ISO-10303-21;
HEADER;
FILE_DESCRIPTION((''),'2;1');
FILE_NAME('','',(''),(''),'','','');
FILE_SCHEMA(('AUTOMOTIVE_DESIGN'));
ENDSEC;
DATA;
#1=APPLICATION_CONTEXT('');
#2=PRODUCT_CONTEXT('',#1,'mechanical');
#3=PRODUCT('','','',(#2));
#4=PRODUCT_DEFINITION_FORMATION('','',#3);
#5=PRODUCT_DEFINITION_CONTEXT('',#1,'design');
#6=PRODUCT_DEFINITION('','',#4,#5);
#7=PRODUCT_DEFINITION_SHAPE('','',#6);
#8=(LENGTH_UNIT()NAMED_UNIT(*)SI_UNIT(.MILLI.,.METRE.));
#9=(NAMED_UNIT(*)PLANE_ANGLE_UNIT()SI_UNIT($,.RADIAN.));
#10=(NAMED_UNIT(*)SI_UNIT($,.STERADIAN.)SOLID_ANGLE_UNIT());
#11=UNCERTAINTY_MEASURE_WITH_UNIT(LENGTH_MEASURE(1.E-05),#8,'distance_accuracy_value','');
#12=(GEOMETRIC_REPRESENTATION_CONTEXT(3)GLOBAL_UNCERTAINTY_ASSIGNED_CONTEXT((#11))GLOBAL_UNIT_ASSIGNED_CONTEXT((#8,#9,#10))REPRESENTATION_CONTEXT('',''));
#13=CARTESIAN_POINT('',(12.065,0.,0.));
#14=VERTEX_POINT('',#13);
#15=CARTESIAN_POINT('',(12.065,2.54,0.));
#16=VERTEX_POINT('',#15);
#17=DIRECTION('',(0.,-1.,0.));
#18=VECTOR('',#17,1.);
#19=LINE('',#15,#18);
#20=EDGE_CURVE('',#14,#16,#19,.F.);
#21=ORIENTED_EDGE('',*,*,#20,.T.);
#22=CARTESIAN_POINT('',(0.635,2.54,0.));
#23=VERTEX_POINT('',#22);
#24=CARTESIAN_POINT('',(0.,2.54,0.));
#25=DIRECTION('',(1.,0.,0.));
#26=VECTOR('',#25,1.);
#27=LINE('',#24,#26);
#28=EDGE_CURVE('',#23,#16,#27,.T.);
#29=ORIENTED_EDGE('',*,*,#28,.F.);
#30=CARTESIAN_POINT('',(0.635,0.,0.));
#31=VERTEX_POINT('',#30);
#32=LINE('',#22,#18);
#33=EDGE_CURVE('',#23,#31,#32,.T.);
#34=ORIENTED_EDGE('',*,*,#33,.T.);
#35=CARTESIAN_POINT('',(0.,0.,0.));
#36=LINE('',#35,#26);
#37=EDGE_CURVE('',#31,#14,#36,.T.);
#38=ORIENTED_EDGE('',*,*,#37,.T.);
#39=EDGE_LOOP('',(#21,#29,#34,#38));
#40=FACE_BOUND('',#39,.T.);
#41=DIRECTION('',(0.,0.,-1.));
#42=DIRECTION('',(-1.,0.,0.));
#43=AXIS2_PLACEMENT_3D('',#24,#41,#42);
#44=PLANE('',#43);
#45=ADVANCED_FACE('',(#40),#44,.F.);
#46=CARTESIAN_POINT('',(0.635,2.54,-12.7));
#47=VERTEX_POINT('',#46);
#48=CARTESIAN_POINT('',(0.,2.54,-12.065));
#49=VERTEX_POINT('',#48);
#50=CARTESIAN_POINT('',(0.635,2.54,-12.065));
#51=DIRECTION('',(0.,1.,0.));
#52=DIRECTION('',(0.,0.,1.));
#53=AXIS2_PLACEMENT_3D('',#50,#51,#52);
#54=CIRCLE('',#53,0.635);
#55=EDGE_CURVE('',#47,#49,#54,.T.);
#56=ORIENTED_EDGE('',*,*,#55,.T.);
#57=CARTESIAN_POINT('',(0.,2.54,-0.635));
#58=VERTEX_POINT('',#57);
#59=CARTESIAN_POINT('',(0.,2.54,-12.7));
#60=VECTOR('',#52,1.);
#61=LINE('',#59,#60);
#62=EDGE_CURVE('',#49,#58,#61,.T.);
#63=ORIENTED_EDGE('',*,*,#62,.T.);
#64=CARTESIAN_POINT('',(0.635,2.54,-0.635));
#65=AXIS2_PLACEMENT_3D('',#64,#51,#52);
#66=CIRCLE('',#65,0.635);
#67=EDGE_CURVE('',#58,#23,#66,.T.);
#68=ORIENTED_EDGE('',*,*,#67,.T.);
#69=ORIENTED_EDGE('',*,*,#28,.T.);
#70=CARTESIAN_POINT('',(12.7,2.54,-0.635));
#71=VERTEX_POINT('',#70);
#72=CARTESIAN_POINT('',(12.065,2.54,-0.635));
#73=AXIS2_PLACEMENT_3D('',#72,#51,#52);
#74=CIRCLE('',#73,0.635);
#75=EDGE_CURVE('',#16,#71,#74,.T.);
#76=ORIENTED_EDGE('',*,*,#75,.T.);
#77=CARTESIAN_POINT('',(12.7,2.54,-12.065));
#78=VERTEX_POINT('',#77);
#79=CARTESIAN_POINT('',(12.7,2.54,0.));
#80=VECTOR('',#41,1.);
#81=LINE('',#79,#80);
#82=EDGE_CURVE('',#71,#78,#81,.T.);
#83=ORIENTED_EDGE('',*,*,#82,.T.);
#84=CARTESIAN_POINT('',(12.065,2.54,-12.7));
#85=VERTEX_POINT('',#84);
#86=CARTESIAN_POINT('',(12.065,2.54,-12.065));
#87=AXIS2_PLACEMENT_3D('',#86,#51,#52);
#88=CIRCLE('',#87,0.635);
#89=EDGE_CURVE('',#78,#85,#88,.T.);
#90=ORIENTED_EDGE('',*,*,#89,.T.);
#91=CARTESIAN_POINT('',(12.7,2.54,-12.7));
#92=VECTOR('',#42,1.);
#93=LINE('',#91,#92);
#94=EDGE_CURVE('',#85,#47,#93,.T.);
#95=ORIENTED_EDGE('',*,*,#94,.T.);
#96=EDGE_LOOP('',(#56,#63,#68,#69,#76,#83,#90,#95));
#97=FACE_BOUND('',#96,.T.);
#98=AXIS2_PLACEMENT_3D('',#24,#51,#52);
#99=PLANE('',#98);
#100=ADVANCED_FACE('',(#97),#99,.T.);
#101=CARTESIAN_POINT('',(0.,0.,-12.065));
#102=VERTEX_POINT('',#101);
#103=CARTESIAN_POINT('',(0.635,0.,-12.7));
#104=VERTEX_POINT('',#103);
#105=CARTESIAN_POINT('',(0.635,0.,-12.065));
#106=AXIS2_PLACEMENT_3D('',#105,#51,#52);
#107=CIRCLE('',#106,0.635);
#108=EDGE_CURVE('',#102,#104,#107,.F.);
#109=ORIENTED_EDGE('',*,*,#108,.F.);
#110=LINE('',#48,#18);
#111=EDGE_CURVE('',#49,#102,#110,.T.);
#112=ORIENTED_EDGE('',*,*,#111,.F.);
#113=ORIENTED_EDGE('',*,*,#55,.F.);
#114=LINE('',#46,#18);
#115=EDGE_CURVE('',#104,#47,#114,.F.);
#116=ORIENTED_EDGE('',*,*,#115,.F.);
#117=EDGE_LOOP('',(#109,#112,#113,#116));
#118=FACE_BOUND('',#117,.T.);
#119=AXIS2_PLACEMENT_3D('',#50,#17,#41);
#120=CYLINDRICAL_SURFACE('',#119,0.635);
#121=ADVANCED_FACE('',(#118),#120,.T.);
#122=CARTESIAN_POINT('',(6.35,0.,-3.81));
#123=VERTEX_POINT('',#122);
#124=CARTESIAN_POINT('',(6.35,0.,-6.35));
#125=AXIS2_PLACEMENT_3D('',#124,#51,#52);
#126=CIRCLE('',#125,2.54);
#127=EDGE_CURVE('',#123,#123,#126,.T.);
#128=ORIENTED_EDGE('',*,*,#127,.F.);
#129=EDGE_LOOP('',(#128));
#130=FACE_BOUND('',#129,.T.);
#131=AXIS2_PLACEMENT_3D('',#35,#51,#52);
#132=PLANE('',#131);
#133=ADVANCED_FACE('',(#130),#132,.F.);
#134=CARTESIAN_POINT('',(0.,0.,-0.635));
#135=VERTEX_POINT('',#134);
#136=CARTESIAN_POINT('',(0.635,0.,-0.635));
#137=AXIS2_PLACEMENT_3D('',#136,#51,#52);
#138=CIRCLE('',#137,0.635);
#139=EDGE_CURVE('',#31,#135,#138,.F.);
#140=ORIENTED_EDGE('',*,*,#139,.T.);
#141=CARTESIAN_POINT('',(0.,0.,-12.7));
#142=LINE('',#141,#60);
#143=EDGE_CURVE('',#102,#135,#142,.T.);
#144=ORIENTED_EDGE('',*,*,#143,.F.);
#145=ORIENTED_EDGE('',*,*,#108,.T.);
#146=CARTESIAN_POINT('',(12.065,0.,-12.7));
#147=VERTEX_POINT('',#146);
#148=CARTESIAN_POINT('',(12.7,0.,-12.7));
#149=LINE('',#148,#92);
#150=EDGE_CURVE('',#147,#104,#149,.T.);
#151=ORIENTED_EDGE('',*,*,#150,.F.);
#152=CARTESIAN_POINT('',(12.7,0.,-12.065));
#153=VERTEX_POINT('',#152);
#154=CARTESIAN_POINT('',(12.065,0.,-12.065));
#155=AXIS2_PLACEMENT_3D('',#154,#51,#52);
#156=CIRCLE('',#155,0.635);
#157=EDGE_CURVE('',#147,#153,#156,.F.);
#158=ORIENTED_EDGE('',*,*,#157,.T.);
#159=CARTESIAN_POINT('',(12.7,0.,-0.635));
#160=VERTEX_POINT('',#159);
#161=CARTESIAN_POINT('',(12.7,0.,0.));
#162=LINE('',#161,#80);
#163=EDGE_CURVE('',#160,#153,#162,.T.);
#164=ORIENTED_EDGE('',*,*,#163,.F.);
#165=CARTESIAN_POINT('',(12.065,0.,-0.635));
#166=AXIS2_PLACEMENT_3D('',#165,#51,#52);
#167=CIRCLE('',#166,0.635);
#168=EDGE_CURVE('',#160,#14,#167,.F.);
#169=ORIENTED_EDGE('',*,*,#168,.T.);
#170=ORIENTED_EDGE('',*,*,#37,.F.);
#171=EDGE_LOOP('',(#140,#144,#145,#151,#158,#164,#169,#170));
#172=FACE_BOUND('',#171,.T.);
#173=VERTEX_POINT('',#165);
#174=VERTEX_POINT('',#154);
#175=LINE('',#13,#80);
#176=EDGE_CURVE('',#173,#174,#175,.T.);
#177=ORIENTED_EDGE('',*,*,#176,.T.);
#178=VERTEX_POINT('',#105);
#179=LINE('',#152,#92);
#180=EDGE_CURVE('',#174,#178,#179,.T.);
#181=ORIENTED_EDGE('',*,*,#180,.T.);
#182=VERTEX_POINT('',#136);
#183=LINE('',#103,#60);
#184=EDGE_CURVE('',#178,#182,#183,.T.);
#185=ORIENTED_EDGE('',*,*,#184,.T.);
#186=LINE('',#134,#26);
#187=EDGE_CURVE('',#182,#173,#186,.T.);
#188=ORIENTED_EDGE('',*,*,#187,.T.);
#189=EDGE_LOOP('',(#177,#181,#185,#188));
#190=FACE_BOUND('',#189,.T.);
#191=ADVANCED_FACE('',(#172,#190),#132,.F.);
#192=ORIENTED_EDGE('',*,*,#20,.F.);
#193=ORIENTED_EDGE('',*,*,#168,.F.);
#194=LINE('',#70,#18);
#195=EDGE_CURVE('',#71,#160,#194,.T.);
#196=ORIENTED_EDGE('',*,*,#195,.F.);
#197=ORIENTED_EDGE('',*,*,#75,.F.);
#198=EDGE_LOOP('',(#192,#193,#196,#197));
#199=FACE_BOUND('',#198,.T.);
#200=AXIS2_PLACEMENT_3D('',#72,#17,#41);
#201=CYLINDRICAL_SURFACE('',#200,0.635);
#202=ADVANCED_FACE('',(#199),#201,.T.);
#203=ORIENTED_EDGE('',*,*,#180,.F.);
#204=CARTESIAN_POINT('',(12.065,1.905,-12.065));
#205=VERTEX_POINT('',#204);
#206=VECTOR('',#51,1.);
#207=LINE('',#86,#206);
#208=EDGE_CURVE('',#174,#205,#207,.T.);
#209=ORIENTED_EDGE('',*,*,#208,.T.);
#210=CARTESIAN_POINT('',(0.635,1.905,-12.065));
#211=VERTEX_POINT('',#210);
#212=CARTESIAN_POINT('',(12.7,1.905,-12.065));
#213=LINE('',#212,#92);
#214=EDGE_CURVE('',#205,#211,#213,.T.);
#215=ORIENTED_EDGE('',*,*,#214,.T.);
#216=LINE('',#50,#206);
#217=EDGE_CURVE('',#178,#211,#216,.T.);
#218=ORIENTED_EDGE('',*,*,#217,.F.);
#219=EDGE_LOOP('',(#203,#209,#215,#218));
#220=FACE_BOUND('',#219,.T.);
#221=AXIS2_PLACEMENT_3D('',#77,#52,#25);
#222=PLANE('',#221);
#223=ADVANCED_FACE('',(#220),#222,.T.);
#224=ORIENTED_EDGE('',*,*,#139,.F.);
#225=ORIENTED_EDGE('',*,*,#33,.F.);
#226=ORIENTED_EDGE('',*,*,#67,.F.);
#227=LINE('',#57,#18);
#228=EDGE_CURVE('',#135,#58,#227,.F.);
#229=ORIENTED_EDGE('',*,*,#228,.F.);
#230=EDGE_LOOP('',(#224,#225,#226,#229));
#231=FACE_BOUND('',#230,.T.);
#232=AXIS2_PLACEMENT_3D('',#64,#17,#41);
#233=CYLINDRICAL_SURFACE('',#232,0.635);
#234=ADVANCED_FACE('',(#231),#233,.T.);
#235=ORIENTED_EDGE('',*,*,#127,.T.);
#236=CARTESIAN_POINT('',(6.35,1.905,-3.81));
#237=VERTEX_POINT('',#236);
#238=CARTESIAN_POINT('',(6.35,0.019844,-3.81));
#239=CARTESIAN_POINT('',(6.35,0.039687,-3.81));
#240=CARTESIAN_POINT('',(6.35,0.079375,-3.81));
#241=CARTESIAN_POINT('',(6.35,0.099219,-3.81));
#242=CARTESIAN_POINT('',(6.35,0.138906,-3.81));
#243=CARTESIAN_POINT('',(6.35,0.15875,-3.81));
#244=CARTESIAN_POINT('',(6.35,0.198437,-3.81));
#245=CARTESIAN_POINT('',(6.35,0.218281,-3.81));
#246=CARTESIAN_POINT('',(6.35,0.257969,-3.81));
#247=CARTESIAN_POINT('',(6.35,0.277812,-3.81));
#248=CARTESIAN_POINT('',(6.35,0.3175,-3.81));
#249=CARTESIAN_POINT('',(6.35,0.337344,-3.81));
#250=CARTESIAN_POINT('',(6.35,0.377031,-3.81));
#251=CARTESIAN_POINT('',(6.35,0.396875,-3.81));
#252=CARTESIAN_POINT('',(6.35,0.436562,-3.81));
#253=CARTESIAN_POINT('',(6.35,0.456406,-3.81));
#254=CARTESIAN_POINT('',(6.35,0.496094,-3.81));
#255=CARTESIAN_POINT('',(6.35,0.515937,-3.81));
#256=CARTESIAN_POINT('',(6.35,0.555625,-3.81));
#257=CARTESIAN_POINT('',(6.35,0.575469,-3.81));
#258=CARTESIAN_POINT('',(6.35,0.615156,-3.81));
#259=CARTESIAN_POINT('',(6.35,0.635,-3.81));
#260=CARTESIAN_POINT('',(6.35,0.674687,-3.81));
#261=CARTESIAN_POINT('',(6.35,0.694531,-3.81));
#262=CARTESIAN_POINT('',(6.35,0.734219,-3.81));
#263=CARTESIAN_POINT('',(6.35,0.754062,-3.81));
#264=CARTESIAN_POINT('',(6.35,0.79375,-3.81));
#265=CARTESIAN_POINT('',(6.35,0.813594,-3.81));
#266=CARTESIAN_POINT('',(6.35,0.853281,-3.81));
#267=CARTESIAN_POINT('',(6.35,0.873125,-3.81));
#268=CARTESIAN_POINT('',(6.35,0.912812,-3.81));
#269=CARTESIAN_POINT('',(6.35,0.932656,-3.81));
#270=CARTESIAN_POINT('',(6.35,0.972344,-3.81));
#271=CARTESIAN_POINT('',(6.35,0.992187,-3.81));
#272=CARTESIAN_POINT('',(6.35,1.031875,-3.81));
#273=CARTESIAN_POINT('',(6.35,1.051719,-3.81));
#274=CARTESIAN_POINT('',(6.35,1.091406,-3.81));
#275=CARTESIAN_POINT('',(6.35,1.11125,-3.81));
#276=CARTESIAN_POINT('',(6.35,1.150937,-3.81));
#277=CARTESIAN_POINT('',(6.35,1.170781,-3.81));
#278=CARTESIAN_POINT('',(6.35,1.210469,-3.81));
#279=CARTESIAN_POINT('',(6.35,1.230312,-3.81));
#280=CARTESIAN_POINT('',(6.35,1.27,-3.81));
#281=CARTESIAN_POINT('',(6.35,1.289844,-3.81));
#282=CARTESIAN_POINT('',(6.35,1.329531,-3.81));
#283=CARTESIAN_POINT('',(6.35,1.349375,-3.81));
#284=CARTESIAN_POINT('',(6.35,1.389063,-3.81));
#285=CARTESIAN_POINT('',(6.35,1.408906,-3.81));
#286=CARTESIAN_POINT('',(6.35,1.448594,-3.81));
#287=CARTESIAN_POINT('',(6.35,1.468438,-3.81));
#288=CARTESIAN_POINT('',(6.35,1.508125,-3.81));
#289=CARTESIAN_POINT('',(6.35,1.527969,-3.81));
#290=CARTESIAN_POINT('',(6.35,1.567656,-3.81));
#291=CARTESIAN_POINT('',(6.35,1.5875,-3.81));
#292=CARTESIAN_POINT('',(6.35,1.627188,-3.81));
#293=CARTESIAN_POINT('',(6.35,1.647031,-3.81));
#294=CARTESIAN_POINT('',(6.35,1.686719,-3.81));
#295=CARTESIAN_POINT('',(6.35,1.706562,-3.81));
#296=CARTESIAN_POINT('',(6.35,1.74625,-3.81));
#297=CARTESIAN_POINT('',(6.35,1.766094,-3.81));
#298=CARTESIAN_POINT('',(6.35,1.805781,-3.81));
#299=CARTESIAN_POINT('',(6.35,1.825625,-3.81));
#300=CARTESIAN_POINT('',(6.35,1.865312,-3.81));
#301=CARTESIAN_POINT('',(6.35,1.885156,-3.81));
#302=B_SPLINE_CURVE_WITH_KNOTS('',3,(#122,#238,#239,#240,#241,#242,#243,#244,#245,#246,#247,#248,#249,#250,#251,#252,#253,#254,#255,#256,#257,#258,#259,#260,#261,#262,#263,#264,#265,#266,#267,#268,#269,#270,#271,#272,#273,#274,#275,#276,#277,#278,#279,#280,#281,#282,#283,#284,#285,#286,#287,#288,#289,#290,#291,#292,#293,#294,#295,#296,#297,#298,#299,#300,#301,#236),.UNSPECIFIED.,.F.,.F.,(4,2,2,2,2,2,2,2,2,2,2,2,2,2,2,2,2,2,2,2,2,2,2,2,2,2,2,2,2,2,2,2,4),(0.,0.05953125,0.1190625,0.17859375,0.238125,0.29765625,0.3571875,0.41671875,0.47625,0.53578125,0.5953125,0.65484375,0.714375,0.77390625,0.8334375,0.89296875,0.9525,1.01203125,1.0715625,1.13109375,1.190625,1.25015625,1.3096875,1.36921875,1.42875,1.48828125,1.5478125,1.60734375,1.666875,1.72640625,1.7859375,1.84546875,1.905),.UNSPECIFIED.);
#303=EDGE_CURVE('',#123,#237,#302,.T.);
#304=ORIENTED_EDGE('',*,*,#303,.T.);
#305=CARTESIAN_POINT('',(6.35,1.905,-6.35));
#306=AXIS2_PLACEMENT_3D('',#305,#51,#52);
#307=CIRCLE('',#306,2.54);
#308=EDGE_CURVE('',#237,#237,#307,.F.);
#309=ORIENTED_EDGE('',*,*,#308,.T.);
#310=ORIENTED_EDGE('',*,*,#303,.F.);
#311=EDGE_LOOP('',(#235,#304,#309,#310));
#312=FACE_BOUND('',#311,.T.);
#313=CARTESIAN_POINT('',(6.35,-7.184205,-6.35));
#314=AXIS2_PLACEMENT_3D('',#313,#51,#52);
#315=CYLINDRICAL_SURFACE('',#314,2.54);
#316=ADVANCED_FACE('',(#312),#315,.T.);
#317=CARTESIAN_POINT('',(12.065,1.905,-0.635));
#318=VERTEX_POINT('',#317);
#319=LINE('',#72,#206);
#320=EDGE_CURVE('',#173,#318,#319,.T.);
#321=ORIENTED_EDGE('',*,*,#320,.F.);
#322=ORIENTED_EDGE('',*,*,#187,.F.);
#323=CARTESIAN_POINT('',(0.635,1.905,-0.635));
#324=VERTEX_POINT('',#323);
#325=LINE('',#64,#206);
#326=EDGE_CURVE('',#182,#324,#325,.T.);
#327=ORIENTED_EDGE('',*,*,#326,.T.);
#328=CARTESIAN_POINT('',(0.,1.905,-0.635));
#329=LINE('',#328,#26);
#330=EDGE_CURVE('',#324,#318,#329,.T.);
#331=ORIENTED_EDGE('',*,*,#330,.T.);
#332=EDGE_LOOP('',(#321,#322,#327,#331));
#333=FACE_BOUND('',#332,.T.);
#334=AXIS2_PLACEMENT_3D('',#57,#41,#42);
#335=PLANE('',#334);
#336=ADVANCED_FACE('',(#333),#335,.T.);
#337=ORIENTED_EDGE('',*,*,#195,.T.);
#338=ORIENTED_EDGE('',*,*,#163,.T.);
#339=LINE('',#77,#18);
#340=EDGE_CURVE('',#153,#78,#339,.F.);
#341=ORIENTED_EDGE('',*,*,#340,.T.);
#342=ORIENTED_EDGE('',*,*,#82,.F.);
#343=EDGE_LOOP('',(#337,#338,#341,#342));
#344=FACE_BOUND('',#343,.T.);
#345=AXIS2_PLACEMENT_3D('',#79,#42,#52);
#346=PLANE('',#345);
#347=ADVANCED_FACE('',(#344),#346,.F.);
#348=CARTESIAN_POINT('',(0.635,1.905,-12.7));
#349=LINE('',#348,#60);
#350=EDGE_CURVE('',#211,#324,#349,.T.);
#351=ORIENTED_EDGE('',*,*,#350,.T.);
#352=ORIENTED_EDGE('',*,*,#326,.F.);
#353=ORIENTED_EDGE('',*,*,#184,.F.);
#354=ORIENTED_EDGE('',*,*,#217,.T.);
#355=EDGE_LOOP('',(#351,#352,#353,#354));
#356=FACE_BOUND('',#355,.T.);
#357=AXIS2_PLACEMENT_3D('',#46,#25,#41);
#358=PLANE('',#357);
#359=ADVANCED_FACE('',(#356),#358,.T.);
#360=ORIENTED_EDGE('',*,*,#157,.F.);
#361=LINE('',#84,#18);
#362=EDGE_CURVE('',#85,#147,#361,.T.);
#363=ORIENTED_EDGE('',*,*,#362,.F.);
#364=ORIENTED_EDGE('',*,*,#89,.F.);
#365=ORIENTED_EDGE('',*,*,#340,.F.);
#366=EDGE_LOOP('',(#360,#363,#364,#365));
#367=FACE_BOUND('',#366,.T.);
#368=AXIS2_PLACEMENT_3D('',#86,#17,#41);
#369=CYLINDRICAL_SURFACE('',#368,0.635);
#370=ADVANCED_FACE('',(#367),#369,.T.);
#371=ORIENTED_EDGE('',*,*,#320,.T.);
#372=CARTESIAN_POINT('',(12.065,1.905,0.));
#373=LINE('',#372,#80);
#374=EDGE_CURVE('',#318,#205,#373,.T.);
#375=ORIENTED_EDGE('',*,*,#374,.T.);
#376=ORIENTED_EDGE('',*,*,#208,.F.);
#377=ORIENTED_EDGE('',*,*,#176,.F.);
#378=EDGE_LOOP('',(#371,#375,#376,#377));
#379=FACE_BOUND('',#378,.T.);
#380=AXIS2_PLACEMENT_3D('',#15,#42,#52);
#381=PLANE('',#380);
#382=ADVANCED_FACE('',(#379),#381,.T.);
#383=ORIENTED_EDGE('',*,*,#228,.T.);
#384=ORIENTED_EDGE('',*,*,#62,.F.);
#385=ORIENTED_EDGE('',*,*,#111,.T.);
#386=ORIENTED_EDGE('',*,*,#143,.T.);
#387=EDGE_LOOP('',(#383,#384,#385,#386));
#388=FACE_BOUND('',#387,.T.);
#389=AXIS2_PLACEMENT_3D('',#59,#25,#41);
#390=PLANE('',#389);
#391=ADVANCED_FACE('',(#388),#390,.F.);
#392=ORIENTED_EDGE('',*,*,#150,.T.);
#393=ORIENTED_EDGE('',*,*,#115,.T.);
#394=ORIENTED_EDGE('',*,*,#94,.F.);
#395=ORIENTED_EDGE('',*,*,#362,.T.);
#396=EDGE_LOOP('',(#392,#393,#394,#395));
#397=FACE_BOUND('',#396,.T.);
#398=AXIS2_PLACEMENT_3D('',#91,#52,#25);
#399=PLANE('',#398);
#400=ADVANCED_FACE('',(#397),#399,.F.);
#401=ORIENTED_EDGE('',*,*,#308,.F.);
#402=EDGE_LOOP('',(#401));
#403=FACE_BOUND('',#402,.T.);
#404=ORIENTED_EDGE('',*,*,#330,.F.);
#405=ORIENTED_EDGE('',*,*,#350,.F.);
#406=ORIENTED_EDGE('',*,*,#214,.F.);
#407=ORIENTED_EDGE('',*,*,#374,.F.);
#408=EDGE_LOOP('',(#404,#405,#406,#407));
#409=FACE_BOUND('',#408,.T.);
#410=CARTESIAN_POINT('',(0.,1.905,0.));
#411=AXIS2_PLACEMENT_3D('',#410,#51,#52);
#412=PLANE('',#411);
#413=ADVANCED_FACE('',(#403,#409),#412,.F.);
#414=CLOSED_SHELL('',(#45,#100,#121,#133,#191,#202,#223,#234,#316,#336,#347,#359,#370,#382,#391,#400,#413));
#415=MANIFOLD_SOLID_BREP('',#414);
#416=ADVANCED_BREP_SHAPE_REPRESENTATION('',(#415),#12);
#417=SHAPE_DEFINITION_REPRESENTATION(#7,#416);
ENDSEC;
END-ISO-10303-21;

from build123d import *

# Parameters (mm, degrees)
SKETCH1_W           = 12.7
SKETCH1_H           = 12.7
BOSS_EXTRUDE1_DEPTH = 2.54
FILLET1_R           = 0.635
SHELL1_START        = 0.635
SHELL1_OUTLINE_W    = 1.905
SHELL1_OUTLINE_H    = 11.43
SHELL1_DEPTH        = 11.43
SKETCH2_R           = 2.54
BOSS_EXTRUDE2_DEPTH = 1.905


# Read off the part's stored shape, not the designer's step: Shell1
with BuildPart() as part:
    # Sketch1 → Boss-Extrude1 (new body)
    with BuildSketch(Plane(origin=(0, 0, 0), x_dir=(1, 0, 0), z_dir=(0, 1, 0))):
        with Locations((6.35, 6.35)):
            Rectangle(SKETCH1_W, SKETCH1_H)
    extrude(amount=BOSS_EXTRUDE1_DEPTH)

    # Fillet1
    fillet1_edges = [part.edges().sort_by_distance(p)[0] for p in [
        (0, 1.27, -12.7),
        (12.7, 1.27, -12.7),
        (12.7, 1.27, 0),
        (0, 1.27, 0),
    ]]
    fillet(fillet1_edges, radius=FILLET1_R)

    # Shell1 outline → Shell1 (cut)
    with BuildSketch(Plane.YZ.offset(SHELL1_START)):
        with Locations((0.9525, -6.35)):
            Rectangle(SHELL1_OUTLINE_W, SHELL1_OUTLINE_H)
    extrude(amount=SHELL1_DEPTH, mode=Mode.SUBTRACT)

    # Sketch2 → Boss-Extrude2 (add)
    with BuildSketch(Plane(origin=(0, 1.905, 0), x_dir=(-1, 0, 0), z_dir=(0, -1, 0))):
        with Locations(Location((-6.35, 6.35, 0), (0, 0, 270))):
            Circle(SKETCH2_R)
    extrude(amount=BOSS_EXTRUDE2_DEPTH)


solid = part.part
